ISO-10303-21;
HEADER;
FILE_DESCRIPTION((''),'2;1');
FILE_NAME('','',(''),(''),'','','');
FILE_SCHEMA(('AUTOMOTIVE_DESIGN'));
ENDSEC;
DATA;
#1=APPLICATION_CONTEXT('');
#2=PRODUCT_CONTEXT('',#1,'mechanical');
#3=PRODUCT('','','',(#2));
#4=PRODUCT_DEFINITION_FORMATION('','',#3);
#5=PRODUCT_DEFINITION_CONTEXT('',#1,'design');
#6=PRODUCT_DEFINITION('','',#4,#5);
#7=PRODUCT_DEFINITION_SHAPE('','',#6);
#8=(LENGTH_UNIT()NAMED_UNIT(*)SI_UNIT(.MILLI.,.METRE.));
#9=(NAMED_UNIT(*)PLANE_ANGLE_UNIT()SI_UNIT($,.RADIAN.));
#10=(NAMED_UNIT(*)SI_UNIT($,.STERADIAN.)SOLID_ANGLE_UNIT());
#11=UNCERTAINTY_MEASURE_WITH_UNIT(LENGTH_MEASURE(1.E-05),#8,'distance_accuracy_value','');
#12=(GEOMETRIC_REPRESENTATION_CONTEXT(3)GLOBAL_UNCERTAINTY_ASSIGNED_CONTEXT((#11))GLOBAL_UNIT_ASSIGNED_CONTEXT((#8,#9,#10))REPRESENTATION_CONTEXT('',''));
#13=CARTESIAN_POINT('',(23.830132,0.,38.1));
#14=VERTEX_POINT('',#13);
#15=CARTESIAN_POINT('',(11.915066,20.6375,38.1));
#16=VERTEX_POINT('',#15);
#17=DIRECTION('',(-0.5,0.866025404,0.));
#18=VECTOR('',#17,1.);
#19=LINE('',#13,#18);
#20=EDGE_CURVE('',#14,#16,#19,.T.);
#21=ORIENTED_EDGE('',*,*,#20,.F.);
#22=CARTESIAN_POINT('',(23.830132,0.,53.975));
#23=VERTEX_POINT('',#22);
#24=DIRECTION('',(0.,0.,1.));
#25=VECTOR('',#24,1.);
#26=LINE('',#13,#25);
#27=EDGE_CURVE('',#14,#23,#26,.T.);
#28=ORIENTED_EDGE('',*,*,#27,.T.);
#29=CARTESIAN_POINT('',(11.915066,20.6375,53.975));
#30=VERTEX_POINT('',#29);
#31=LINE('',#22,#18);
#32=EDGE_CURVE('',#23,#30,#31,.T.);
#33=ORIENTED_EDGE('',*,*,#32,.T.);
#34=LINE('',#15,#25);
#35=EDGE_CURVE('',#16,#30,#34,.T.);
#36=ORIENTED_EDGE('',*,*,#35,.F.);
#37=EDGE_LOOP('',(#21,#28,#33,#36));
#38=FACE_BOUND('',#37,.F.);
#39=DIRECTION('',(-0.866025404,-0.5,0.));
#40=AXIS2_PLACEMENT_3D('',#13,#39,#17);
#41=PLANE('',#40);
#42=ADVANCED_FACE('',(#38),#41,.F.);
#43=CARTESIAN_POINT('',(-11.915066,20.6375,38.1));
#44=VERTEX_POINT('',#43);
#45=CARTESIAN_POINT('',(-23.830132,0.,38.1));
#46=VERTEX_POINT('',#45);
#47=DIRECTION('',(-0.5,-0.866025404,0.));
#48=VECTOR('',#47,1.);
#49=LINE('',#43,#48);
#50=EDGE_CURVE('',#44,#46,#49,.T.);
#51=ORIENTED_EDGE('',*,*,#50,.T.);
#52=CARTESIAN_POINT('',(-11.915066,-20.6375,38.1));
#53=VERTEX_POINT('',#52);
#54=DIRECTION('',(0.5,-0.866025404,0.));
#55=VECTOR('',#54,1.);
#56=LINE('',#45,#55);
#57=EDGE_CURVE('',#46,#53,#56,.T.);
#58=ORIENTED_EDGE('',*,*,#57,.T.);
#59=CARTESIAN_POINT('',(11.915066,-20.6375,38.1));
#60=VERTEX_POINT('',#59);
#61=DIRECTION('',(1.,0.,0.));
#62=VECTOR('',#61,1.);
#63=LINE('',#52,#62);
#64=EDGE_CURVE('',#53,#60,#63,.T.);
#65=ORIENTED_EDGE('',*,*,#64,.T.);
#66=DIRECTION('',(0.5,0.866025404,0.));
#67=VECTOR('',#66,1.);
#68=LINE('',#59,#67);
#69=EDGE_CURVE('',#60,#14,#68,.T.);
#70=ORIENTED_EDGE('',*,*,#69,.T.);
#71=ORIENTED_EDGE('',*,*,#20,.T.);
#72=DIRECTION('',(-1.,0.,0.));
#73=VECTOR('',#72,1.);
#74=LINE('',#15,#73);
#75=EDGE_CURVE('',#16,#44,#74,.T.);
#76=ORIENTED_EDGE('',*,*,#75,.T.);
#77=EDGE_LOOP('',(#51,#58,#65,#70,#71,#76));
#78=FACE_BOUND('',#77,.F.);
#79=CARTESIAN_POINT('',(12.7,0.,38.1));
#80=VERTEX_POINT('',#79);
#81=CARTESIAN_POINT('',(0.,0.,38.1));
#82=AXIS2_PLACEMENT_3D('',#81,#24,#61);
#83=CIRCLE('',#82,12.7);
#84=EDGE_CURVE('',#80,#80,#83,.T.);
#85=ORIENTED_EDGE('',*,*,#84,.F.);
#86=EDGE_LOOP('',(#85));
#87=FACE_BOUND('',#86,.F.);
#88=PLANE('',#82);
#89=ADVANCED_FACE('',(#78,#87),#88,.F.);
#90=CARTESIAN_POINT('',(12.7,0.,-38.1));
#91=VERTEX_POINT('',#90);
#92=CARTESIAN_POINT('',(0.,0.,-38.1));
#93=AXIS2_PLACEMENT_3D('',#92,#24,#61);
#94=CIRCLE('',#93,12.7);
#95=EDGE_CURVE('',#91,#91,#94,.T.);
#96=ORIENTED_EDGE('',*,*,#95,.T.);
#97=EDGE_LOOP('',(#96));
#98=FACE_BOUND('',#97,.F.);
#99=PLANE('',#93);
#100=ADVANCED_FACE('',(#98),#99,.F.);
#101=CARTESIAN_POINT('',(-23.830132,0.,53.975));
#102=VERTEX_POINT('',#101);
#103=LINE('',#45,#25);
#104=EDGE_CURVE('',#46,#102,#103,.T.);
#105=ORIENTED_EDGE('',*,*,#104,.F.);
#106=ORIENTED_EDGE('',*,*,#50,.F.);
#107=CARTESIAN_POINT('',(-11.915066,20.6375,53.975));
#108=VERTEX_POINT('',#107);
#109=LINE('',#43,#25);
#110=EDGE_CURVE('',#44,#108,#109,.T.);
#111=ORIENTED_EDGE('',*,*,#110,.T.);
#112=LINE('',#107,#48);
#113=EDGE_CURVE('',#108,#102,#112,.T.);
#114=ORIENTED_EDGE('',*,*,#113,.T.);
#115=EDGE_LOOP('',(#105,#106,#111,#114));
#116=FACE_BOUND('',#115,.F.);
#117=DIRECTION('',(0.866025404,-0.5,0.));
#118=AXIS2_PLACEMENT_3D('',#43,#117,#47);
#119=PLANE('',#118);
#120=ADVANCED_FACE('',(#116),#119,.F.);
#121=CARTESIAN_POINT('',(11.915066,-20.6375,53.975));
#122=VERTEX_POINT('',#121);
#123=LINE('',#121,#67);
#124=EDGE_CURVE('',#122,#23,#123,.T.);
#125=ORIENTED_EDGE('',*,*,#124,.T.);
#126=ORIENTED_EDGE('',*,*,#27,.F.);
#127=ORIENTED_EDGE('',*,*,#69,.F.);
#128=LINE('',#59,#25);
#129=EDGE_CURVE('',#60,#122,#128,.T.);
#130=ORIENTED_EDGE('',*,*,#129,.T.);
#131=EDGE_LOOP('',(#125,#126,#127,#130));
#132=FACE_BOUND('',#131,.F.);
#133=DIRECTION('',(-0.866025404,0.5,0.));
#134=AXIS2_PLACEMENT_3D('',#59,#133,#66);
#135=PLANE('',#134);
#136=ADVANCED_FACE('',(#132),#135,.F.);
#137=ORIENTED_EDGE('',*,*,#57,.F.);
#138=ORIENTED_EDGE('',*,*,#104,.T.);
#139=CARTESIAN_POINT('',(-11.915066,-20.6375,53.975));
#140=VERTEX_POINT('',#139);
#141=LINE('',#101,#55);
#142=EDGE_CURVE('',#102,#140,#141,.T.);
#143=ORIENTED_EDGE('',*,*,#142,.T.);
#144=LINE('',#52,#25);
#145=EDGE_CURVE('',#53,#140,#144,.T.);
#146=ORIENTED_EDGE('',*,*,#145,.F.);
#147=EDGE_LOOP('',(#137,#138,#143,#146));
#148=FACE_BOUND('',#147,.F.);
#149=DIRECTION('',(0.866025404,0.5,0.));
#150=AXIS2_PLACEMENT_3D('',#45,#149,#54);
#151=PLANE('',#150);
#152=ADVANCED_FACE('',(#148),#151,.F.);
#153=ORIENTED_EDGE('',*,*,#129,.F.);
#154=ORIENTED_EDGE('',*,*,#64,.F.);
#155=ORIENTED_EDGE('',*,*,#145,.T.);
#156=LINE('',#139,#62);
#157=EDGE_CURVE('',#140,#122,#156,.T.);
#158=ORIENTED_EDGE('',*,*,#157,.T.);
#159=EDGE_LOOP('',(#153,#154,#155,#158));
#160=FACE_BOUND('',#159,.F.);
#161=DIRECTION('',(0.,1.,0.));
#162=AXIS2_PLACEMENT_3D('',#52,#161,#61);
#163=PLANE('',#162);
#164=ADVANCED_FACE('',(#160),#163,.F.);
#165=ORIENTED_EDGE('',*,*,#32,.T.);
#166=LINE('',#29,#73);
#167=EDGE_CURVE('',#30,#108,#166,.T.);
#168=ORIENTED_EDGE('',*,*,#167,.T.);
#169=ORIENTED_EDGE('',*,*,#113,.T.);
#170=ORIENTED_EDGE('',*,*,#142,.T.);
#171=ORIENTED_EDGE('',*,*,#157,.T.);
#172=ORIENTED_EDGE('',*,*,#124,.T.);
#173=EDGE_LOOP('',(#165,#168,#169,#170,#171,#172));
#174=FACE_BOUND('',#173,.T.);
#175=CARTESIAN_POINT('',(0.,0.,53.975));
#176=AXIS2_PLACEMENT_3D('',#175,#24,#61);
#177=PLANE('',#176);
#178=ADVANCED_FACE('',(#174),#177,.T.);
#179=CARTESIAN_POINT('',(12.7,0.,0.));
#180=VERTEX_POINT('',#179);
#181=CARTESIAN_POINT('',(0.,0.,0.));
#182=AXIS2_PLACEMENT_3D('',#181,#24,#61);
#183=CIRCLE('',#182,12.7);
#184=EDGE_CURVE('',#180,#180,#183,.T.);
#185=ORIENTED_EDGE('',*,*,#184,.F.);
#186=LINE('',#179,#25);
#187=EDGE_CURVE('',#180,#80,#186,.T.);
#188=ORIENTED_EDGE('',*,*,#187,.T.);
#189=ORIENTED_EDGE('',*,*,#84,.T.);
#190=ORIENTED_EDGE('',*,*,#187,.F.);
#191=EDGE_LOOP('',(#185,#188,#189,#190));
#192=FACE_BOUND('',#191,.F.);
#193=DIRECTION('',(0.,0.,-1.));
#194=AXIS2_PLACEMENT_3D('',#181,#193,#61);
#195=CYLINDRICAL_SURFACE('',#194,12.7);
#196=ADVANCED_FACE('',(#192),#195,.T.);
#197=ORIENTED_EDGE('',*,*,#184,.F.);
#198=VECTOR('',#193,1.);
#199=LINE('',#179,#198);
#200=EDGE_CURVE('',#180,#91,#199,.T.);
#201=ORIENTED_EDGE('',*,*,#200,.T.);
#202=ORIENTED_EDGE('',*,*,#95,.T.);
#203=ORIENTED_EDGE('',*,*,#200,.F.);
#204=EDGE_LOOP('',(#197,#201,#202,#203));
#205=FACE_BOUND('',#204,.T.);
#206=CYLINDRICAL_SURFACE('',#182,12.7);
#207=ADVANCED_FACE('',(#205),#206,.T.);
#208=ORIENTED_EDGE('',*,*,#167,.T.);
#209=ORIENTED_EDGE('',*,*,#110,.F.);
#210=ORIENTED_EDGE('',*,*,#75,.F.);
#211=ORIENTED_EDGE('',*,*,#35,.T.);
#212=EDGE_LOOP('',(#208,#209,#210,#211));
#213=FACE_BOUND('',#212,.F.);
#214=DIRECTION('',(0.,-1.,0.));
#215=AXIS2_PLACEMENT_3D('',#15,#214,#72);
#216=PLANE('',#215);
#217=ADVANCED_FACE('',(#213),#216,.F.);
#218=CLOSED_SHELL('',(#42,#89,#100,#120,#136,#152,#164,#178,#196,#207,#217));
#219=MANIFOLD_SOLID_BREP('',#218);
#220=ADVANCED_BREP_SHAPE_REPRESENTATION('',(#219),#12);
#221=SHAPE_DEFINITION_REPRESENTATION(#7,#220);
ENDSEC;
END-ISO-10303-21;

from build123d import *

# Parameters (mm, degrees)
F0_R          = 12.7
F1_DEPTH      = 38.1
F1_DEPTH_BACK = 38.1
F3_DEPTH      = 15.875


# Not quite as in the source:
# - a feature names something its author has since deleted; it is built from what else it names


with BuildPart() as f1:
    # F0 (on Top) → F1 (new body, two sides)
    with BuildSketch(Plane.XY) as f1_sk:
        Circle(F0_R)
    extrude(amount=-F1_DEPTH)
    extrude(f1_sk.sketch, amount=F1_DEPTH_BACK)

    # F2 (on face) → F3 (join)
    with BuildSketch(Plane.XY.offset(38.1)):
        Polygon((11.9150661804, 20.6375), (-11.9150661804, 20.6375), (-23.8301323608, 0), (-11.9150661804, -20.6375), (11.9150661804, -20.6375), (23.8301323608, 0), align=None)
    extrude(amount=F3_DEPTH)


solid = f1.part
